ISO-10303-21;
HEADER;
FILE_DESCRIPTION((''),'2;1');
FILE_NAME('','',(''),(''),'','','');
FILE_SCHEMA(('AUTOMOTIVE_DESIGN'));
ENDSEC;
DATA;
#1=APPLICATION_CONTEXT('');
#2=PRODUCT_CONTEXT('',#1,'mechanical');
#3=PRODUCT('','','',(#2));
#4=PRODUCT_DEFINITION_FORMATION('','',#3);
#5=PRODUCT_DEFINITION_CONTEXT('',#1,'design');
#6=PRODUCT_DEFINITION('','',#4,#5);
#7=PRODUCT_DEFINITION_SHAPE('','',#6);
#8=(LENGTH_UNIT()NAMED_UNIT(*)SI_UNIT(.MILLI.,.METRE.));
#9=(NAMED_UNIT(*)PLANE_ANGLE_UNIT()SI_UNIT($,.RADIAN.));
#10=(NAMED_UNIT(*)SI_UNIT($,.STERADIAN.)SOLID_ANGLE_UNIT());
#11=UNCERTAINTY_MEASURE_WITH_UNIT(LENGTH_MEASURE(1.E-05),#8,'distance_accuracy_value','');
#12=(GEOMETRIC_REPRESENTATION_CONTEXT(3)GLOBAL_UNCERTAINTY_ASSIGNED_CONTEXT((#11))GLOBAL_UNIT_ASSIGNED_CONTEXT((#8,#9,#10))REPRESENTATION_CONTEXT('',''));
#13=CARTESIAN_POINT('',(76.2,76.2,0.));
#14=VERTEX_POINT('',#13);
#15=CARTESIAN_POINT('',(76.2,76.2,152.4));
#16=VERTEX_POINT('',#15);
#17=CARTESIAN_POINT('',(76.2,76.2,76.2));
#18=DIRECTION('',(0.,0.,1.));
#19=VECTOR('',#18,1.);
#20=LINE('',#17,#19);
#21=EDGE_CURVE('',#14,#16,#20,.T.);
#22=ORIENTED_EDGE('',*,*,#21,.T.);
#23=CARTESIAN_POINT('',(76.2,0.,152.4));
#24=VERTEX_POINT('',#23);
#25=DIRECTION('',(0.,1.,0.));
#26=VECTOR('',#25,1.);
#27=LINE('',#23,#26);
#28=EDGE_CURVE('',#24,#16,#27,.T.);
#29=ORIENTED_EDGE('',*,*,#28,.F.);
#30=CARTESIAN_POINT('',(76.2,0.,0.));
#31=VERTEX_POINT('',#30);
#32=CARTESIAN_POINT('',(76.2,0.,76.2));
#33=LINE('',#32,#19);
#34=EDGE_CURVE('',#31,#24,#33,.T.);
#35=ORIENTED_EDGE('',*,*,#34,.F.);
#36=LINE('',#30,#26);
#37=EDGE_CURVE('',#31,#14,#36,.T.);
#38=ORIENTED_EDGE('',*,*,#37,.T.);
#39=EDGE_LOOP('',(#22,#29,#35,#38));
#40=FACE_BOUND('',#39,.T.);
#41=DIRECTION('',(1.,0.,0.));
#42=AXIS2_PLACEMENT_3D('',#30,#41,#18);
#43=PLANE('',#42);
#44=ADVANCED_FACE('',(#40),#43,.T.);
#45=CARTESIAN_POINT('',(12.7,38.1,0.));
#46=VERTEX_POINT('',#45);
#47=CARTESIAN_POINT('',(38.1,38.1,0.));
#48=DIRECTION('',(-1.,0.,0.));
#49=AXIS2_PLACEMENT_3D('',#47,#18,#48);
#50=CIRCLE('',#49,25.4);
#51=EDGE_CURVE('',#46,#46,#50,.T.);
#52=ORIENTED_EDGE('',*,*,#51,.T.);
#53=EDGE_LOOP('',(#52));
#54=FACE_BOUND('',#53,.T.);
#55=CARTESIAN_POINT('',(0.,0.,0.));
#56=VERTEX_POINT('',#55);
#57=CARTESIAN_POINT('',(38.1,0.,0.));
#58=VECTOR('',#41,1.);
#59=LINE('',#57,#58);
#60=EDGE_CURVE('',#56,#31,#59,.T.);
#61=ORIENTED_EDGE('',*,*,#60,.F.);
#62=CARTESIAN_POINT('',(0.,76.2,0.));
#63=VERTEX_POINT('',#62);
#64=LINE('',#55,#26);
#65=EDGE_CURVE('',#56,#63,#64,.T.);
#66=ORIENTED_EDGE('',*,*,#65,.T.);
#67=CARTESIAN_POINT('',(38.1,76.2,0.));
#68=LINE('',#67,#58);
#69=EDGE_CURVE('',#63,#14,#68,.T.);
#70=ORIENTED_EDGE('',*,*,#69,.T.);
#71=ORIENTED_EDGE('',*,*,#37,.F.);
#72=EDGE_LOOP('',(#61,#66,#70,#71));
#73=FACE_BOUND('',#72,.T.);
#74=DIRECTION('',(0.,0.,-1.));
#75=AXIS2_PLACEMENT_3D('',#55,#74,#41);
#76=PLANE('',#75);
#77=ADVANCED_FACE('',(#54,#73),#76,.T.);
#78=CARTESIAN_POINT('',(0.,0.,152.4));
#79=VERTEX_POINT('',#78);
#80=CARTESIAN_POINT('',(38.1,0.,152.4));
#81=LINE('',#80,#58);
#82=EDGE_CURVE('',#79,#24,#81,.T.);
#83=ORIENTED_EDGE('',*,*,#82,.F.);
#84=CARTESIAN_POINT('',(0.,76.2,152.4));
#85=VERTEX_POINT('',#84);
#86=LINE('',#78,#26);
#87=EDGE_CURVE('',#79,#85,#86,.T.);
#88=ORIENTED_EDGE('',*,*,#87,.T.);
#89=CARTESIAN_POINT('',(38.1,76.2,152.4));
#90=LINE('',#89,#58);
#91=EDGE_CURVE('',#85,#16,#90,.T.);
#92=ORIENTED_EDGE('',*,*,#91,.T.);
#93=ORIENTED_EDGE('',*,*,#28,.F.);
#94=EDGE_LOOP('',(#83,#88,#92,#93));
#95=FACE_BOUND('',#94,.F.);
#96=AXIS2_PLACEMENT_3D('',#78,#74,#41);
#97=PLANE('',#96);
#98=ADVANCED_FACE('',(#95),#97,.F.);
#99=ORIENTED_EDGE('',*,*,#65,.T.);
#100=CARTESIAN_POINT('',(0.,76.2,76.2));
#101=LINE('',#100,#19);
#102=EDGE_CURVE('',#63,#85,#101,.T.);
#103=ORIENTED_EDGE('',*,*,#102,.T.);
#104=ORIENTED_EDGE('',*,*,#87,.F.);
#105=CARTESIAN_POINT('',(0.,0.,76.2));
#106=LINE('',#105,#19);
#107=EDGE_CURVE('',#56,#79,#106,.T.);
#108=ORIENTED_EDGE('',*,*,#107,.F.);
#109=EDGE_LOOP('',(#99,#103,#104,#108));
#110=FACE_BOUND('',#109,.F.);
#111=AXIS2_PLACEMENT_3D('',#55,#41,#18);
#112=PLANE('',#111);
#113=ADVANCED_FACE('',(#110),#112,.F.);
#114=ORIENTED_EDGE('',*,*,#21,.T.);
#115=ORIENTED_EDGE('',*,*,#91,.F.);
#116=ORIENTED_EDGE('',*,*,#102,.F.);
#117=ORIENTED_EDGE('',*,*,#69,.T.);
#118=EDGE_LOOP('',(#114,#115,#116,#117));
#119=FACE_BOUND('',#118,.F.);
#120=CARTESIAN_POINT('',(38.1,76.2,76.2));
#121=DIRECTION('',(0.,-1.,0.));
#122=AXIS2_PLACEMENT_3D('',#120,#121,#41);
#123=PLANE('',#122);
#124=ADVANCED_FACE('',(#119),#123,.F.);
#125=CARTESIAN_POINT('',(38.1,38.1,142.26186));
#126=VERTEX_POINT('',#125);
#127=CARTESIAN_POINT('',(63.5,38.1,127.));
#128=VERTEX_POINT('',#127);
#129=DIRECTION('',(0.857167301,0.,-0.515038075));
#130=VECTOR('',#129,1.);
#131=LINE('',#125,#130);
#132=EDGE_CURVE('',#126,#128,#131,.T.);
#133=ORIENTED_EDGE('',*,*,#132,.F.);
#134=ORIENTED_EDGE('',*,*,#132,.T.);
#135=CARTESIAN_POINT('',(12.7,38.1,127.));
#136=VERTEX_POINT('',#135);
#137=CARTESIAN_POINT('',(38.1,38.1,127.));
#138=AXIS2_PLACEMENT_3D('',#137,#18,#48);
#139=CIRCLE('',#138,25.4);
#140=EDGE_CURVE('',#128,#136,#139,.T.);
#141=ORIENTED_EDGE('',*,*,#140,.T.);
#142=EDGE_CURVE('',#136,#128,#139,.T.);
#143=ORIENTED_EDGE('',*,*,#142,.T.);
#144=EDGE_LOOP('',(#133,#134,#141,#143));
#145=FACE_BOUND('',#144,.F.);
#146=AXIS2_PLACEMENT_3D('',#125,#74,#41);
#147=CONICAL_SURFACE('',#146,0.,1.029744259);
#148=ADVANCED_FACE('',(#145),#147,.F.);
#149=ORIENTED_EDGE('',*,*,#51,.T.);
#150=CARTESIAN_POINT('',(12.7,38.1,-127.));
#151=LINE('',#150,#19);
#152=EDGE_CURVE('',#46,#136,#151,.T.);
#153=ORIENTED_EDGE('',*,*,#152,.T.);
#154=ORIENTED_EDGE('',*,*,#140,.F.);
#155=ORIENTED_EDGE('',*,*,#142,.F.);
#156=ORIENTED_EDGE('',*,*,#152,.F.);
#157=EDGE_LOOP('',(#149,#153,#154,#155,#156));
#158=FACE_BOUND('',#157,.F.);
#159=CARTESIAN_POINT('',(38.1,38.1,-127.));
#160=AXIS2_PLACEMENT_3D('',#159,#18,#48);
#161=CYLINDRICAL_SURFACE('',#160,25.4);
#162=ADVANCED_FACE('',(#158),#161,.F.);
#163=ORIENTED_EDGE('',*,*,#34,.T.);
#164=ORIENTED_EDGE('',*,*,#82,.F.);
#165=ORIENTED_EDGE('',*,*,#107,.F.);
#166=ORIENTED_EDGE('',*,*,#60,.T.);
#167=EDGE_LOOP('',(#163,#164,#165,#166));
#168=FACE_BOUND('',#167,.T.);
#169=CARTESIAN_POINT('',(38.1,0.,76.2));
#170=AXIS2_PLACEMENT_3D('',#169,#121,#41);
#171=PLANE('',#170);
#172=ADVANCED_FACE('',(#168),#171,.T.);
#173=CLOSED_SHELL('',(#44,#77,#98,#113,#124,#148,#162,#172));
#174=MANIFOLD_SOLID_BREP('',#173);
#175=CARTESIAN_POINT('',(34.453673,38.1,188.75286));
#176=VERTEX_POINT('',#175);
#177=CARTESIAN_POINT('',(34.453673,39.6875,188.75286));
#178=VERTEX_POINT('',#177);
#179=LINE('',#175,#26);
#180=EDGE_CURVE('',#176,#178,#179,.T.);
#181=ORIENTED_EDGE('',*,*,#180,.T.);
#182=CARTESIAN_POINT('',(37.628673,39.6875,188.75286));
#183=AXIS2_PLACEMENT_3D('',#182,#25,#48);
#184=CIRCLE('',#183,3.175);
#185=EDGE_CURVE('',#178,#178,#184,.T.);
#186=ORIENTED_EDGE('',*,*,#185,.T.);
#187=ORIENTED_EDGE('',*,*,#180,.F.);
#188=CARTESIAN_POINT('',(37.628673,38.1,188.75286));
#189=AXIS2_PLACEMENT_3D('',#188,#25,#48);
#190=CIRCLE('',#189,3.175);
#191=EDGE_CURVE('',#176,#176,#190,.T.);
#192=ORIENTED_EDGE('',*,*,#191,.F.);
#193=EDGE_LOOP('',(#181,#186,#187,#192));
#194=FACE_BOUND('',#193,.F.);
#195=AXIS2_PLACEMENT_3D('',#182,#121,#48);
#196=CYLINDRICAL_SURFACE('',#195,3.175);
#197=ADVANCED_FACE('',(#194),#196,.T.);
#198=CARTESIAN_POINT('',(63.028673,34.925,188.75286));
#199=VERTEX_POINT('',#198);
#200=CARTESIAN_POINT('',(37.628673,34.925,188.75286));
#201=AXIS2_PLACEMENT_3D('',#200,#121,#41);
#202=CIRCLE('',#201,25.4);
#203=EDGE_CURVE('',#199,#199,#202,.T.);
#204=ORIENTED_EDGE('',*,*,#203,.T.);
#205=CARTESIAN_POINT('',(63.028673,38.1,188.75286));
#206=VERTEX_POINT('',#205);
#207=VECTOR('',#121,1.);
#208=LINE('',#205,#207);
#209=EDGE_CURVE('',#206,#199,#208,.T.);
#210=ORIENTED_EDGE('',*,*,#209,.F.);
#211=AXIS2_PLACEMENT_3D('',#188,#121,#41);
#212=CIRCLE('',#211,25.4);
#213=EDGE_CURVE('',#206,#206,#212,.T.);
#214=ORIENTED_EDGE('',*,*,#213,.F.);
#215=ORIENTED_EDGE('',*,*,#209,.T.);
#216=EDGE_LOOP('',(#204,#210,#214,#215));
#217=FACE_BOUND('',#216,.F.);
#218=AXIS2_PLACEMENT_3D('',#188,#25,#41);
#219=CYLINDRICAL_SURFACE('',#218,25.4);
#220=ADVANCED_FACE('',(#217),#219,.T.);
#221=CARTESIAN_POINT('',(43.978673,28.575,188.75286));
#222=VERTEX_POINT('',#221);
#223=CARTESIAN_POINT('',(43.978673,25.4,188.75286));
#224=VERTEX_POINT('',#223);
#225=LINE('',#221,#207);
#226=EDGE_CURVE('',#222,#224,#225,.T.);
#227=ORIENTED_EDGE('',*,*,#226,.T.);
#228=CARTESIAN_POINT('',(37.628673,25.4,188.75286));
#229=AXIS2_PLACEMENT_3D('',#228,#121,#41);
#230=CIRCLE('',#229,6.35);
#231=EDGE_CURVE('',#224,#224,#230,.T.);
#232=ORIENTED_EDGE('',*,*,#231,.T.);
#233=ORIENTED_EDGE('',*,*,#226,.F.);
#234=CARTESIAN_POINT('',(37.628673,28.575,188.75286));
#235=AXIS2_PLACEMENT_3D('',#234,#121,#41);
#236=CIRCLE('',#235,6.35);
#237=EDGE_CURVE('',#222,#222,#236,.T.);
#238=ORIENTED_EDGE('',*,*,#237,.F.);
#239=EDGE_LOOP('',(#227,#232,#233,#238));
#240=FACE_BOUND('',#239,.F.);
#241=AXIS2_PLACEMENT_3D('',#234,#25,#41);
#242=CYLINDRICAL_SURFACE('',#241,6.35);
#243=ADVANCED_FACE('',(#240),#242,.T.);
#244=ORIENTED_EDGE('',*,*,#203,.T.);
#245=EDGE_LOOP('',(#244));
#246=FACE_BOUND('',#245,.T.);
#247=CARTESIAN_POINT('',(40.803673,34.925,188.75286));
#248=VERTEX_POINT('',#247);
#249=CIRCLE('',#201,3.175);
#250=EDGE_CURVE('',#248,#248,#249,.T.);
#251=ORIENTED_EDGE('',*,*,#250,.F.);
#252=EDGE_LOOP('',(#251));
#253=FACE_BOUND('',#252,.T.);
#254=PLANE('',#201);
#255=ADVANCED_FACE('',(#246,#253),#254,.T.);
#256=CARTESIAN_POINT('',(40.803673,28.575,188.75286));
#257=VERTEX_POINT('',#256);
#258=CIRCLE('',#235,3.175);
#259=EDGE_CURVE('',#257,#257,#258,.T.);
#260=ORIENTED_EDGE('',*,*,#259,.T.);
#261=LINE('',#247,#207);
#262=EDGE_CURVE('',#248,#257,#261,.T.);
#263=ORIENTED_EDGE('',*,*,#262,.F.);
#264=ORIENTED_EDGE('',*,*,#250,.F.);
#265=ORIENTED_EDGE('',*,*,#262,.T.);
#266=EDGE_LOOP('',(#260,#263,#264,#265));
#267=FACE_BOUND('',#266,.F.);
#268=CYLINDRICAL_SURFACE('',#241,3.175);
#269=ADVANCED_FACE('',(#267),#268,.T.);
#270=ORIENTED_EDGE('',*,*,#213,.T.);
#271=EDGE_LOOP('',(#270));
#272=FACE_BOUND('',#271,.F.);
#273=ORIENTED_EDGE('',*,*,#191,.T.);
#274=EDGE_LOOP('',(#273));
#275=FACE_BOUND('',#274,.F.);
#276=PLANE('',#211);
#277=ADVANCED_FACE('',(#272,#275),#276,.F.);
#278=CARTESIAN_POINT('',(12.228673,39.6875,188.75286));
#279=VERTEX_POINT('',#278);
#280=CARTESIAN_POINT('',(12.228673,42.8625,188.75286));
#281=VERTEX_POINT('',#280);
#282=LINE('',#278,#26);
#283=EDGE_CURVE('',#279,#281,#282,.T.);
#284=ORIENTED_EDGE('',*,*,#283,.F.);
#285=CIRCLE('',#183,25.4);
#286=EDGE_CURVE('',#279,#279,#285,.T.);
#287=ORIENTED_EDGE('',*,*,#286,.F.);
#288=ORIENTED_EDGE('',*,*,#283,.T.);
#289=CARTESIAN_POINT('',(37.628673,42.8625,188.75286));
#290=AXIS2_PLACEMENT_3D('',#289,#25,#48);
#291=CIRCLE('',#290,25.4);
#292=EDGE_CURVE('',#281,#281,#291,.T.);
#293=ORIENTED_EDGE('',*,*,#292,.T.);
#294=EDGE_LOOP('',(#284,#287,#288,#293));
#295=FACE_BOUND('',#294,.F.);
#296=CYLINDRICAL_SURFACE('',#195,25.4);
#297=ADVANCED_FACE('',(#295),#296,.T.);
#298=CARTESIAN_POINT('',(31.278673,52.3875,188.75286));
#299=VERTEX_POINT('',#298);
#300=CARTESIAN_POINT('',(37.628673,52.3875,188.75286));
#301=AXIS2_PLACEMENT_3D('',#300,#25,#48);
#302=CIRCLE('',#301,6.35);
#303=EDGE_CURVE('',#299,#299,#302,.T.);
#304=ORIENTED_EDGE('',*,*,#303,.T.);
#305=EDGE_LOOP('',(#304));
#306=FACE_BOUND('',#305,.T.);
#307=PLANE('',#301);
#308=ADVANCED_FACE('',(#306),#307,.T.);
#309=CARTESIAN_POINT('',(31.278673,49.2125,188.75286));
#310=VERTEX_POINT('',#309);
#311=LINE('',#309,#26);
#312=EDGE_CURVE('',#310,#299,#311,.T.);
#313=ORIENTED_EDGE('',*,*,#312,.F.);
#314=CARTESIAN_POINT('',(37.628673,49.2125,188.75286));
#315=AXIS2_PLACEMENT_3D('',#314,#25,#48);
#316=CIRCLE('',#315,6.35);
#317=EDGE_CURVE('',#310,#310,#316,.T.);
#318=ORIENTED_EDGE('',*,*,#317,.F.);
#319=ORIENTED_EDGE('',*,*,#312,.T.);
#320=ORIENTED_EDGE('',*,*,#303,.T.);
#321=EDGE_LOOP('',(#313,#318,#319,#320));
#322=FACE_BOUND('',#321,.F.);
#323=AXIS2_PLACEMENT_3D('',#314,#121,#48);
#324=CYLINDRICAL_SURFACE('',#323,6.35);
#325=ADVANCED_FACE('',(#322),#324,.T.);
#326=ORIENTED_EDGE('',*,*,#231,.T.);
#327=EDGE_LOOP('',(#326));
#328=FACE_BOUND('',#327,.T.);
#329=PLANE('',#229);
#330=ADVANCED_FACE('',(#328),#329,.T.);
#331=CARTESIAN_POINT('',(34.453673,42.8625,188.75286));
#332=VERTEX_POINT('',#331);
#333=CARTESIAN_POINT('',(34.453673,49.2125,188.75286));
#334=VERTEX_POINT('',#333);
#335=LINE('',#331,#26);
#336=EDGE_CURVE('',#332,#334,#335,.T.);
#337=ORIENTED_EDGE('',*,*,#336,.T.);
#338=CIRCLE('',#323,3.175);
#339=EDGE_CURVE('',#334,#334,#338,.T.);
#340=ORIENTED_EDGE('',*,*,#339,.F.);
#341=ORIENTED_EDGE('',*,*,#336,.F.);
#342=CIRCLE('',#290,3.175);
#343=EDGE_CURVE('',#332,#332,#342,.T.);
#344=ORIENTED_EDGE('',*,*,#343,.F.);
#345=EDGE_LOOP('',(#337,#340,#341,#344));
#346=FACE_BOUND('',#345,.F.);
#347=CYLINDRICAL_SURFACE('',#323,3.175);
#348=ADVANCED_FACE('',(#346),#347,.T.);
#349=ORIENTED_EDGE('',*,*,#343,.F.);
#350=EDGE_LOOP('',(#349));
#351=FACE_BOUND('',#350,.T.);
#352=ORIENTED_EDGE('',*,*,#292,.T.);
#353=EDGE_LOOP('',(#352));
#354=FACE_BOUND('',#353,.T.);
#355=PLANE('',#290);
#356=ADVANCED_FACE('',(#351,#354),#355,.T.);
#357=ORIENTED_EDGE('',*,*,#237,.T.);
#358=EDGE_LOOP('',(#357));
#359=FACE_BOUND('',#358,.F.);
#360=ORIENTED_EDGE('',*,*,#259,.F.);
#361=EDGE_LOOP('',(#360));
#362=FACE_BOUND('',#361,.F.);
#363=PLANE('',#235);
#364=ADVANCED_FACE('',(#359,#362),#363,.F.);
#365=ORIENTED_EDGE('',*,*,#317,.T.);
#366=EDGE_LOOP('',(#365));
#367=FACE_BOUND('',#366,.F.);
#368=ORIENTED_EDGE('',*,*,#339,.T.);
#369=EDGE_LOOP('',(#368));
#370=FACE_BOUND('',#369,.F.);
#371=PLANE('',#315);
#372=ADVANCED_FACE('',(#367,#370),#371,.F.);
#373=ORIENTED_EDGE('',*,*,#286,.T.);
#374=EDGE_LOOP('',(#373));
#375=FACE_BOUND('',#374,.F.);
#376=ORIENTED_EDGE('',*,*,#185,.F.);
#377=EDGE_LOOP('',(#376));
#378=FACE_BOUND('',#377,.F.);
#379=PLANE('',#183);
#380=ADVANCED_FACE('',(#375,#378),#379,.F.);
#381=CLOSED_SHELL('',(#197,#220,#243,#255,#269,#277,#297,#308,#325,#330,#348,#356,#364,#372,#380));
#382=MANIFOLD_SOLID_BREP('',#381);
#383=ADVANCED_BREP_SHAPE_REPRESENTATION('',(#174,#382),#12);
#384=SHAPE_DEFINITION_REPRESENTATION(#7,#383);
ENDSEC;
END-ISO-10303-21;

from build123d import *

# Parameters (mm, degrees)
F0_W      = 76.2
F0_H      = 152.4
F1_DEPTH  = 76.2
F3_D      = 50.8
F3_DEPTH  = 127
F3_TIP    = 15.2618597233
F5_R      = 25.4
F7_DEPTH  = 3.175
F8_R      = 3.175
F9_DEPTH  = 1.5875
F10_R     = 3.175
F11_DEPTH = 3.175
F10_R_2   = 25.4
F12_DEPTH = 3.175
F13_R     = 3.175
F14_DEPTH = 6.35
F15_R     = 3.175
F16_DEPTH = 6.35
F17_R     = 3.175
F18_DEPTH = 3.175
F17_R_2   = 6.35
F19_DEPTH = 3.175
F20_R     = 3.175
F21_DEPTH = 3.175
F20_R_2   = 6.35
F22_DEPTH = 3.175


# Not quite as in the source:
# - the program builds the solid bodies; features that only make, move or delete a surface that nothing else refers to are left out


with BuildPart() as f1:
    # F0 (on Front) → F1 (new body)
    with BuildSketch(Plane.XZ):
        with Locations((38.1, 76.2)):
            Rectangle(F0_W, F0_H)
    extrude(amount=-F1_DEPTH)

    # F3
    with Locations(Plane(origin=(0, 0, 0), x_dir=(1, 0, 0), z_dir=(0, 0, -1))):
        with Locations((38.1, -38.1)):
            Hole(F3_D / 2, depth=F3_DEPTH)
            with Locations((0, 0, -(F3_DEPTH + F3_TIP / 2))):  # 118° drill point
                Cone(0, F3_D / 2, F3_TIP, mode=Mode.SUBTRACT)


with BuildPart() as f7:
    # F5 (on offset) → F7 (new body)
    with BuildSketch(Plane.XZ.offset(-38.1)):
        with Locations((37.628673017, 188.7528598309)):
            Circle(F5_R)
    extrude(amount=F7_DEPTH)

    # F8 (on face) → F9 (join)
    with BuildSketch(Plane(origin=(0, 38.1, 0), x_dir=(-1, 0, 0), z_dir=(0, 1, 0))):
        with Locations((-37.628673017, 188.7528598309)):
            Circle(F8_R)
    extrude(amount=F9_DEPTH)

    # F10 (on face) → F11 (join)
    with BuildSketch(Plane(origin=(0, 39.6875, 0), x_dir=(-1, 0, 0), z_dir=(0, 1, 0))):
        with Locations((-37.628673017, 188.7528598309)):
            Circle(F10_R)
    extrude(amount=F11_DEPTH)

    # F10 (on face) → F12 (join)
    with BuildSketch(Plane(origin=(0, 39.6875, 0), x_dir=(-1, 0, 0), z_dir=(0, 1, 0))):
        with Locations((-37.628673017, 188.7528598309)):
            Circle(F10_R_2)
        with Locations((-37.628673017, 188.7528598309)):
            Circle(F10_R, mode=Mode.SUBTRACT)
    extrude(amount=F12_DEPTH)

    # F13 (on face) → F14 (join)
    with BuildSketch(Plane(origin=(0, 42.8625, 0), x_dir=(-1, 0, 0), z_dir=(0, 1, 0))):
        with Locations((-37.628673017, 188.7528598309)):
            Circle(F13_R)
    extrude(amount=F14_DEPTH)

    # F15 (on face) → F16 (join)
    with BuildSketch(Plane.XZ.offset(-34.925)):
        with Locations((37.628673017, 188.7528598309)):
            Circle(F15_R)
    extrude(amount=F16_DEPTH)

    # F17 (on face) → F18 (join)
    with BuildSketch(Plane.XZ.offset(-28.575)):
        with Locations((37.628673017, 188.7528598309)):
            Circle(F17_R)
    extrude(amount=F18_DEPTH)

    # F17 (on face) → F19 (join)
    with BuildSketch(Plane.XZ.offset(-28.575)):
        with Locations((37.628673017, 188.7528598309)):
            Circle(F17_R_2)
        with Locations((37.628673017, 188.7528598309)):
            Circle(F17_R, mode=Mode.SUBTRACT)
    extrude(amount=F19_DEPTH)

    # F20 (on face) → F21 (join)
    with BuildSketch(Plane(origin=(0, 49.2125, 0), x_dir=(-1, 0, 0), z_dir=(0, 1, 0))):
        with Locations((-37.628673017, 188.7528598309)):
            Circle(F20_R)
    extrude(amount=F21_DEPTH)

    # F20 (on face) → F22 (join)
    with BuildSketch(Plane(origin=(0, 49.2125, 0), x_dir=(-1, 0, 0), z_dir=(0, 1, 0))):
        with Locations((-37.628673017, 188.7528598309)):
            Circle(F20_R_2)
    extrude(amount=F22_DEPTH)


solid = Compound([f1.part, f7.part])
